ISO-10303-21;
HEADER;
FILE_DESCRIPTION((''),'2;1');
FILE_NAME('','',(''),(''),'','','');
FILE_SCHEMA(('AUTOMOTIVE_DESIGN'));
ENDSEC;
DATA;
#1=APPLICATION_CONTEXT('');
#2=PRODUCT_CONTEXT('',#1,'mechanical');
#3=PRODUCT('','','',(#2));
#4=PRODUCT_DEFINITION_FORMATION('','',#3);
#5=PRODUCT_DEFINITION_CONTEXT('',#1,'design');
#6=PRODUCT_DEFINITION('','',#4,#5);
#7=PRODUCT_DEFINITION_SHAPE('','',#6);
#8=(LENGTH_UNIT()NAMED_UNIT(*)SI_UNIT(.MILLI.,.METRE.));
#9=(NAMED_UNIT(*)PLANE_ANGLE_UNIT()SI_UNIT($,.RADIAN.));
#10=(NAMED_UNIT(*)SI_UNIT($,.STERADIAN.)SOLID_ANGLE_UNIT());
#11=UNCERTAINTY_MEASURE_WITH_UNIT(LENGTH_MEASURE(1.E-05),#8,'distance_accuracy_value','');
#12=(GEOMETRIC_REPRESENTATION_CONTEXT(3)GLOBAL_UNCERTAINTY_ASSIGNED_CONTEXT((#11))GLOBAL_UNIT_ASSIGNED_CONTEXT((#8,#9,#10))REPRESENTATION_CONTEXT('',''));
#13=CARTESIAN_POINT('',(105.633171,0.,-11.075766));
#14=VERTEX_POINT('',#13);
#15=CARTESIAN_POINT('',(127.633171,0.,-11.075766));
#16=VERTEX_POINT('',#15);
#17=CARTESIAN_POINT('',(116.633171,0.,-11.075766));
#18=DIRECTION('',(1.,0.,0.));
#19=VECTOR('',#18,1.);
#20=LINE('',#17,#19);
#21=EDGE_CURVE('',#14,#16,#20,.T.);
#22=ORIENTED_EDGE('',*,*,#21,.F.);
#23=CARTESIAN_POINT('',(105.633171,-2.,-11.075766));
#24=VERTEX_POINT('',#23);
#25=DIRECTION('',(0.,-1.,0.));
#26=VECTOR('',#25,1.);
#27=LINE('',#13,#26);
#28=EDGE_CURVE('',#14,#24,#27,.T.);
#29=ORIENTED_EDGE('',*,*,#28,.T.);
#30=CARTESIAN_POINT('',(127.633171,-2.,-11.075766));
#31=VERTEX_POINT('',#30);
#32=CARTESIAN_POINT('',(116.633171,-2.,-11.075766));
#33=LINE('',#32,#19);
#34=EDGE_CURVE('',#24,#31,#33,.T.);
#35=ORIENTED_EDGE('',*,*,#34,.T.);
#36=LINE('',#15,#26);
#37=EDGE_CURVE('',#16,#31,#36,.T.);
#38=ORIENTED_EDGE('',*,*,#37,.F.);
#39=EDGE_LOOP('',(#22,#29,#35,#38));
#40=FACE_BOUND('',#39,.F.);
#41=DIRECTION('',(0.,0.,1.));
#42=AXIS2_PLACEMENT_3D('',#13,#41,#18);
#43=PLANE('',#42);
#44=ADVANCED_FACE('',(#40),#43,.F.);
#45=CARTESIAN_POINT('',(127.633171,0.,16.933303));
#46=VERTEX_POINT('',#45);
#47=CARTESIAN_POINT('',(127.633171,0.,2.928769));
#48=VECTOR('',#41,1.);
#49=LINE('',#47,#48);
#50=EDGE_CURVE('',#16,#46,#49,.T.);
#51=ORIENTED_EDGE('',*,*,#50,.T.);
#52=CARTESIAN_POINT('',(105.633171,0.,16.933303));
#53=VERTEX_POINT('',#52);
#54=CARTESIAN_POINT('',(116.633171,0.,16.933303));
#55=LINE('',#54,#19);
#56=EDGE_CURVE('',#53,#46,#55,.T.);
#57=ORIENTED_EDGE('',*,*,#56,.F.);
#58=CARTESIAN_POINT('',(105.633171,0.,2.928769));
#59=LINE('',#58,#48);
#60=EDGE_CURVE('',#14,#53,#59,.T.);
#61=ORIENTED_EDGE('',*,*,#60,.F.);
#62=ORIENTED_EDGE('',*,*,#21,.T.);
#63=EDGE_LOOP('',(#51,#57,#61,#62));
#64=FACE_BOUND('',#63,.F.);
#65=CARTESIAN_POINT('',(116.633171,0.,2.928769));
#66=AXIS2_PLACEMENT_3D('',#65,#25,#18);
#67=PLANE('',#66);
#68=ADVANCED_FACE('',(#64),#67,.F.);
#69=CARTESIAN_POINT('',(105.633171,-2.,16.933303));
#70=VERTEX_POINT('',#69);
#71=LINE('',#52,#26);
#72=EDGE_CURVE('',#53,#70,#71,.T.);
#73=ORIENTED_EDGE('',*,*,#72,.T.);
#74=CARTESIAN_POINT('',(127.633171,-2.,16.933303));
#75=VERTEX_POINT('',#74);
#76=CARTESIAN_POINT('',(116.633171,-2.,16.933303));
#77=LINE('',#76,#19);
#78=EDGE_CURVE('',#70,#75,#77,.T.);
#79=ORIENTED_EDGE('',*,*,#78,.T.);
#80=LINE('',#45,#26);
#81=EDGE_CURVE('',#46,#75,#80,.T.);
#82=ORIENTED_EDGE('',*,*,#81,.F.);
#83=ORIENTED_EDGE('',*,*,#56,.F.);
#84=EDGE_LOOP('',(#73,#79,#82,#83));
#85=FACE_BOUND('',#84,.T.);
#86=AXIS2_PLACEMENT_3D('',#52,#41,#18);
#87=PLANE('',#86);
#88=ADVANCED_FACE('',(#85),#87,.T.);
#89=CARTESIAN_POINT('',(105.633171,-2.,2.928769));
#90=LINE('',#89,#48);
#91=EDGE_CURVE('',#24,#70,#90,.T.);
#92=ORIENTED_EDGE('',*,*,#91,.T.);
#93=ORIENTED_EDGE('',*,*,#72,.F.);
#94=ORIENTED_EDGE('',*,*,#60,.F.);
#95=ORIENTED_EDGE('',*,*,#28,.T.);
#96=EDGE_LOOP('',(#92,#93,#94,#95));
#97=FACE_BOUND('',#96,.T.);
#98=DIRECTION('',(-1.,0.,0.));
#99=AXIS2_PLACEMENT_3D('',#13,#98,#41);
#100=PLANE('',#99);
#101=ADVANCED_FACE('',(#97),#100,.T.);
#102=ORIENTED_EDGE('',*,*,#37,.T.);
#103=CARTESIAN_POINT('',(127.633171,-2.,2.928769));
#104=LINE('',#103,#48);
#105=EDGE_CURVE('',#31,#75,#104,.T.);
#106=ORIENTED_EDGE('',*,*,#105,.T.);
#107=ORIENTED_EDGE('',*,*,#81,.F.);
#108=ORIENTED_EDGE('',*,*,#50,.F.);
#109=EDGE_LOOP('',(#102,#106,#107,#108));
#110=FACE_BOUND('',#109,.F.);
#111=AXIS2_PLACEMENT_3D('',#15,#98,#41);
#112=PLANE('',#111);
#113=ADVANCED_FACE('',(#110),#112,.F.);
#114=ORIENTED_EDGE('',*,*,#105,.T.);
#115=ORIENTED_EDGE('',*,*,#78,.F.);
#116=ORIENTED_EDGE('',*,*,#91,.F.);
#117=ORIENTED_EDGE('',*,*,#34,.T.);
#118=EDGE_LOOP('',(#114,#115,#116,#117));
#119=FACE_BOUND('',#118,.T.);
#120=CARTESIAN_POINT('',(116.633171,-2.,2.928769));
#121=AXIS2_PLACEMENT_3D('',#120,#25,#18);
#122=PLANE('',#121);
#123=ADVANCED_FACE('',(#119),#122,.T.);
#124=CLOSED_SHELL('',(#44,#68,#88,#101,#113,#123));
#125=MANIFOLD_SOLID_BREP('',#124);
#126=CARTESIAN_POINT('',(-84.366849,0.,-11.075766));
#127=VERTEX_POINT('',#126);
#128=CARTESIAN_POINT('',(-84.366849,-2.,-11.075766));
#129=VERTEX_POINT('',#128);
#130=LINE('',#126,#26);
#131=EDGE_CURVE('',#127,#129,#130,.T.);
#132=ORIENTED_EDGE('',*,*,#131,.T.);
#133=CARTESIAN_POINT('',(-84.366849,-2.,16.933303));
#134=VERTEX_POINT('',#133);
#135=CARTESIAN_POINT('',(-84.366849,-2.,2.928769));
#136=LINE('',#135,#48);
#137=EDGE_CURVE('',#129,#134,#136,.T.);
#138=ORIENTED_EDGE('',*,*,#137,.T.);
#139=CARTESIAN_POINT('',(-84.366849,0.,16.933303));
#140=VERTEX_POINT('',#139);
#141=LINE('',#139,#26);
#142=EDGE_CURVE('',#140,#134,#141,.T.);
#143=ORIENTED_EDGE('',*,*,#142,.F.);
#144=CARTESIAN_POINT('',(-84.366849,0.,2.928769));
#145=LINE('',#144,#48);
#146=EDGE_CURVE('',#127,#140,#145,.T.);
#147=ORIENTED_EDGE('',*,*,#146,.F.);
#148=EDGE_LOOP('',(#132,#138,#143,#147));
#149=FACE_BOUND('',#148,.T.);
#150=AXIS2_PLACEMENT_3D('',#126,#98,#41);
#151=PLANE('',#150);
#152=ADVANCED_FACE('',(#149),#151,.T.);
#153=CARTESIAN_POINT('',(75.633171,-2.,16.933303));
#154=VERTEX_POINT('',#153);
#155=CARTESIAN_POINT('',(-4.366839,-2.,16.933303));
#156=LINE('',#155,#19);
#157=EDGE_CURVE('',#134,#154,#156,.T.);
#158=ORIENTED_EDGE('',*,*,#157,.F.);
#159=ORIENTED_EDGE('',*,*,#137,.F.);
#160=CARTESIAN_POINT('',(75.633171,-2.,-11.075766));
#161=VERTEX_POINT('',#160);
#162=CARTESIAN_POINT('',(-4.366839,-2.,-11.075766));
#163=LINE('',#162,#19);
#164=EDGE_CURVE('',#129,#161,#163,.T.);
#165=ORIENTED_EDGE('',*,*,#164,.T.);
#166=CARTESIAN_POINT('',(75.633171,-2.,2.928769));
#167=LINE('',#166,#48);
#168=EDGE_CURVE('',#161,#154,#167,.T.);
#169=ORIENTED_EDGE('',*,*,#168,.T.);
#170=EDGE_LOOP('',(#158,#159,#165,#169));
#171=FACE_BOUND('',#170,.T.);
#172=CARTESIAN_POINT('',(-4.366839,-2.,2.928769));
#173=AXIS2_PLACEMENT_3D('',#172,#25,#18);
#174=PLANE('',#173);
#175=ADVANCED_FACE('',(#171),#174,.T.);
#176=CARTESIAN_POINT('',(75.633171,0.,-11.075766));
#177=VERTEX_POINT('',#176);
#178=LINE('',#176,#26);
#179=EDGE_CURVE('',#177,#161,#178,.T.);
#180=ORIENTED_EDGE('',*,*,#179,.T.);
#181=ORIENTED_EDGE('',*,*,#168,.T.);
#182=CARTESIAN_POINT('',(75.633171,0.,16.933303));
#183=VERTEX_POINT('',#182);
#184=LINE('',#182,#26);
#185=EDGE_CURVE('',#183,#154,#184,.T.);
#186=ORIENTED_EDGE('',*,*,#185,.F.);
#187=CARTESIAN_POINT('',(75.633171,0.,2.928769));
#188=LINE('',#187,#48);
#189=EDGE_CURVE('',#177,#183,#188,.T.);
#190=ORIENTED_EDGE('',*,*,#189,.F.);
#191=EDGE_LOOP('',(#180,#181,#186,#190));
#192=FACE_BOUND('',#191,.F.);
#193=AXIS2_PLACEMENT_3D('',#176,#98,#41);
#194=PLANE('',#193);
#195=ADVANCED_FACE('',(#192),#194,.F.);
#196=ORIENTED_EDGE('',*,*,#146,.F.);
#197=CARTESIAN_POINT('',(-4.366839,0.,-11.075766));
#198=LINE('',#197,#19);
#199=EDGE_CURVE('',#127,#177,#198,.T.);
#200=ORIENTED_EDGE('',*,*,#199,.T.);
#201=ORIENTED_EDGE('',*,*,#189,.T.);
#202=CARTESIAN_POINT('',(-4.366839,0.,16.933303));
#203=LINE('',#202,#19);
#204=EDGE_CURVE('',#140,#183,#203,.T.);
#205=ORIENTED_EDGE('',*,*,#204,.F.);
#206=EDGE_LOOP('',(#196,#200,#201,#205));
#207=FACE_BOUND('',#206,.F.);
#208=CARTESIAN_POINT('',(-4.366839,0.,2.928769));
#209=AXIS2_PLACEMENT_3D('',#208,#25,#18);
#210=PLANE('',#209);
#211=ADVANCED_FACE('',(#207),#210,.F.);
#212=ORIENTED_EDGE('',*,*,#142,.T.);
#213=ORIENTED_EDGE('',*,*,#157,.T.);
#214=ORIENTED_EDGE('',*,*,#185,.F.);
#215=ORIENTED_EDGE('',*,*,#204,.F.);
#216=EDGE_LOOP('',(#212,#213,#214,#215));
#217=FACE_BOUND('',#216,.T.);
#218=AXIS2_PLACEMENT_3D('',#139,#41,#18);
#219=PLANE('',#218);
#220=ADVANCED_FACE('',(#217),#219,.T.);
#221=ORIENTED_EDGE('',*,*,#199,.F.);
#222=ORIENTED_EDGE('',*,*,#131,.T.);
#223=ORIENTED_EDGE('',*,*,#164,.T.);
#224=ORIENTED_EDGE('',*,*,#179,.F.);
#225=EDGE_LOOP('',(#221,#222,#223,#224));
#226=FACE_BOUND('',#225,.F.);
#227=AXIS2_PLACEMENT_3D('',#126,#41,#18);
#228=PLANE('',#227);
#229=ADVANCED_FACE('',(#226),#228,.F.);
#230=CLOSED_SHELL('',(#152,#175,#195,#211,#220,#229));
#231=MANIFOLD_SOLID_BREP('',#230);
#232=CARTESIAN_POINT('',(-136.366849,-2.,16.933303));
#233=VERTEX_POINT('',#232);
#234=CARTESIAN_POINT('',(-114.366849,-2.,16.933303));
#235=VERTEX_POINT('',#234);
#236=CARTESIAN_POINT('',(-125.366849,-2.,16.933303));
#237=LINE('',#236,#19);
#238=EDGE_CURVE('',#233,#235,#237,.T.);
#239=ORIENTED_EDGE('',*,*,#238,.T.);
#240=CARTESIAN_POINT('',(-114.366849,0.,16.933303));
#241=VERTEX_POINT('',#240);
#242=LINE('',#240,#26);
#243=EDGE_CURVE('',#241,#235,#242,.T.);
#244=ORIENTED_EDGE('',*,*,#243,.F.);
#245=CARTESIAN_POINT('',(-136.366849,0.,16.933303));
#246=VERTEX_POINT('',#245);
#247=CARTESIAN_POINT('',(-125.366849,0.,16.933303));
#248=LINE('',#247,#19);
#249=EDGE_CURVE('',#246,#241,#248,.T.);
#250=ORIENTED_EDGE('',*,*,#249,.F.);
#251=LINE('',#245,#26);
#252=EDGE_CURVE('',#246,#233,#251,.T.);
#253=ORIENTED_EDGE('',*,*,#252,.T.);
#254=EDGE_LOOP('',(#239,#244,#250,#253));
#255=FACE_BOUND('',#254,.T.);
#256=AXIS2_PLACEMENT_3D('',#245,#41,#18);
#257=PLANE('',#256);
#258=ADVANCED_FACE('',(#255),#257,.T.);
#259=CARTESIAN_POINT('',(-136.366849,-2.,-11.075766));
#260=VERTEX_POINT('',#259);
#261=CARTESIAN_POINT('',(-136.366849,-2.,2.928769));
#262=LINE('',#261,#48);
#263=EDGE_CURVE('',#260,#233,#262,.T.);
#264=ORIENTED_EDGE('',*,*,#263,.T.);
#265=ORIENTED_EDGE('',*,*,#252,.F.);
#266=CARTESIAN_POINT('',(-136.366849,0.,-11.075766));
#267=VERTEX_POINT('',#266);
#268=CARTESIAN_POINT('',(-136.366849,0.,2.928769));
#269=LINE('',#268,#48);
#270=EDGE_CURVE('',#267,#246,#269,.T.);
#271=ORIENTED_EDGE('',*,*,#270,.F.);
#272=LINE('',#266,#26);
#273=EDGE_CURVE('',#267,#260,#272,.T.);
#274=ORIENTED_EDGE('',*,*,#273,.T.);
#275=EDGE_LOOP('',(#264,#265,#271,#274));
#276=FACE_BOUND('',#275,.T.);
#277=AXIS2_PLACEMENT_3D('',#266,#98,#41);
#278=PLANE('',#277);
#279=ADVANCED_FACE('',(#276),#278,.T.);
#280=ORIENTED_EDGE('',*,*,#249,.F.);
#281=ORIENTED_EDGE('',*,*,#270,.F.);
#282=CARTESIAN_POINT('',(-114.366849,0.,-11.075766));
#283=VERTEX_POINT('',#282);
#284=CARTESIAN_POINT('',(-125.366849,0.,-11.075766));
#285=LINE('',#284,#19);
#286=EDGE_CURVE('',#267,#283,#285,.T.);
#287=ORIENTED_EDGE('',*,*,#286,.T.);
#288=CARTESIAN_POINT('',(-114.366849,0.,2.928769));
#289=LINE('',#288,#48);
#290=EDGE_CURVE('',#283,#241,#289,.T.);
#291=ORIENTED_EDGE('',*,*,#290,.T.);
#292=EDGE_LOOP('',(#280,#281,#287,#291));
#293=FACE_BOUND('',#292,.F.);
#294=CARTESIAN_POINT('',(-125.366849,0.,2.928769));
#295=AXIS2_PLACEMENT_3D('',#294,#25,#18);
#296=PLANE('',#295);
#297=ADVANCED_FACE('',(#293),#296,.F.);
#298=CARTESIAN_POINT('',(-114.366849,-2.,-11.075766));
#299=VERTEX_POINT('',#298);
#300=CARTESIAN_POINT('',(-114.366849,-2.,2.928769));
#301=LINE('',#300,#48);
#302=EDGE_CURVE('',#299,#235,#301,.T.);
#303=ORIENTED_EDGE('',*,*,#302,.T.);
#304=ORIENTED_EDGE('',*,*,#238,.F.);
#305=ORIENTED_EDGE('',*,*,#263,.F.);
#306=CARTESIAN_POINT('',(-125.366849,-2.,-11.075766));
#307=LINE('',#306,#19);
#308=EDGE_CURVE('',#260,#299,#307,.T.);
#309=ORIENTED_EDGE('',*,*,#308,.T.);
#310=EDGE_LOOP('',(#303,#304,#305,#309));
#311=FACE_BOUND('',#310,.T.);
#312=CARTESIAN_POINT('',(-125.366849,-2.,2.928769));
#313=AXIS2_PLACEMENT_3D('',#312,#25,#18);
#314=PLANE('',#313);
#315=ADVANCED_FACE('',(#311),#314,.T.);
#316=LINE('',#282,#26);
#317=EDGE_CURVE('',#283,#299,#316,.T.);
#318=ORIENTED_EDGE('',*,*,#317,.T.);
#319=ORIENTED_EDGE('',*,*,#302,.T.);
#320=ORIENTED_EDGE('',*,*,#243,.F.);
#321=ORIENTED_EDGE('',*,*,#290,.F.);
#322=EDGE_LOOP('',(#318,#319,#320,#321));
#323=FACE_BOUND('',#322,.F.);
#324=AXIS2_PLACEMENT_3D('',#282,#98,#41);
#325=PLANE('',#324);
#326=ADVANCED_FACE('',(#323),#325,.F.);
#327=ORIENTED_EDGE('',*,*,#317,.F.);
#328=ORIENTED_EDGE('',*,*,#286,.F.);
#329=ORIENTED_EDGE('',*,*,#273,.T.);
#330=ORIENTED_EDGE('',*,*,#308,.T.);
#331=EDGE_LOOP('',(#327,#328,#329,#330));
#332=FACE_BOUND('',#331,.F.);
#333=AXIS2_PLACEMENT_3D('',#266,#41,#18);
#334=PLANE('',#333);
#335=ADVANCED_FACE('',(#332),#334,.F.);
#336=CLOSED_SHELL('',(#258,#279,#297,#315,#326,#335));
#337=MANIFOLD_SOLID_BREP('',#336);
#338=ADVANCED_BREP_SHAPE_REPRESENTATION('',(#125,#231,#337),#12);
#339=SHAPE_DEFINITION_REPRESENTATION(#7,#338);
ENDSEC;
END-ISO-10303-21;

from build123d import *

# Parameters (mm, degrees)
F0_W     = 160.0000202656
F0_H     = 28.0090686734
F0_W_2   = 156
F0_H_2   = 16
F1_DEPTH = 2
F0_W_3   = 22
F2_DEPTH = 2
F3_DEPTH = 2


# Not quite as in the source:
# - a feature names something its author has since deleted; it is built from what else it names


with BuildPart() as f1:
    # F0 (on Front) → F1 (new body)
    with BuildSketch(Plane.XZ):
        with Locations((-4.366838785, 2.9287685109)):
            Rectangle(F0_W, F0_H)
        with Locations((-4.3668536862, -1.0666644891)):
            Rectangle(F0_W_2, F0_H_2, mode=Mode.SUBTRACT)
        with Locations((-4.3668536862, -1.0666644891)):
            Rectangle(F0_W_2, F0_H_2)
    extrude(amount=F1_DEPTH)


with BuildPart() as f2:
    # F0 (on Front) → F2 (new body)
    with BuildSketch(Plane.XZ):
        with Locations((116.6331713478, 2.9287685109)):
            Rectangle(F0_W_3, F0_H)
    extrude(amount=F2_DEPTH)


with BuildPart() as f3:
    # F0 (on Front) → F3 (new body)
    with BuildSketch(Plane.XZ):
        with Locations((-125.3668489178, 2.9287685109)):
            Rectangle(F0_W_3, F0_H)
    extrude(amount=F3_DEPTH)


solid = Compound([f1.part, f2.part, f3.part])
